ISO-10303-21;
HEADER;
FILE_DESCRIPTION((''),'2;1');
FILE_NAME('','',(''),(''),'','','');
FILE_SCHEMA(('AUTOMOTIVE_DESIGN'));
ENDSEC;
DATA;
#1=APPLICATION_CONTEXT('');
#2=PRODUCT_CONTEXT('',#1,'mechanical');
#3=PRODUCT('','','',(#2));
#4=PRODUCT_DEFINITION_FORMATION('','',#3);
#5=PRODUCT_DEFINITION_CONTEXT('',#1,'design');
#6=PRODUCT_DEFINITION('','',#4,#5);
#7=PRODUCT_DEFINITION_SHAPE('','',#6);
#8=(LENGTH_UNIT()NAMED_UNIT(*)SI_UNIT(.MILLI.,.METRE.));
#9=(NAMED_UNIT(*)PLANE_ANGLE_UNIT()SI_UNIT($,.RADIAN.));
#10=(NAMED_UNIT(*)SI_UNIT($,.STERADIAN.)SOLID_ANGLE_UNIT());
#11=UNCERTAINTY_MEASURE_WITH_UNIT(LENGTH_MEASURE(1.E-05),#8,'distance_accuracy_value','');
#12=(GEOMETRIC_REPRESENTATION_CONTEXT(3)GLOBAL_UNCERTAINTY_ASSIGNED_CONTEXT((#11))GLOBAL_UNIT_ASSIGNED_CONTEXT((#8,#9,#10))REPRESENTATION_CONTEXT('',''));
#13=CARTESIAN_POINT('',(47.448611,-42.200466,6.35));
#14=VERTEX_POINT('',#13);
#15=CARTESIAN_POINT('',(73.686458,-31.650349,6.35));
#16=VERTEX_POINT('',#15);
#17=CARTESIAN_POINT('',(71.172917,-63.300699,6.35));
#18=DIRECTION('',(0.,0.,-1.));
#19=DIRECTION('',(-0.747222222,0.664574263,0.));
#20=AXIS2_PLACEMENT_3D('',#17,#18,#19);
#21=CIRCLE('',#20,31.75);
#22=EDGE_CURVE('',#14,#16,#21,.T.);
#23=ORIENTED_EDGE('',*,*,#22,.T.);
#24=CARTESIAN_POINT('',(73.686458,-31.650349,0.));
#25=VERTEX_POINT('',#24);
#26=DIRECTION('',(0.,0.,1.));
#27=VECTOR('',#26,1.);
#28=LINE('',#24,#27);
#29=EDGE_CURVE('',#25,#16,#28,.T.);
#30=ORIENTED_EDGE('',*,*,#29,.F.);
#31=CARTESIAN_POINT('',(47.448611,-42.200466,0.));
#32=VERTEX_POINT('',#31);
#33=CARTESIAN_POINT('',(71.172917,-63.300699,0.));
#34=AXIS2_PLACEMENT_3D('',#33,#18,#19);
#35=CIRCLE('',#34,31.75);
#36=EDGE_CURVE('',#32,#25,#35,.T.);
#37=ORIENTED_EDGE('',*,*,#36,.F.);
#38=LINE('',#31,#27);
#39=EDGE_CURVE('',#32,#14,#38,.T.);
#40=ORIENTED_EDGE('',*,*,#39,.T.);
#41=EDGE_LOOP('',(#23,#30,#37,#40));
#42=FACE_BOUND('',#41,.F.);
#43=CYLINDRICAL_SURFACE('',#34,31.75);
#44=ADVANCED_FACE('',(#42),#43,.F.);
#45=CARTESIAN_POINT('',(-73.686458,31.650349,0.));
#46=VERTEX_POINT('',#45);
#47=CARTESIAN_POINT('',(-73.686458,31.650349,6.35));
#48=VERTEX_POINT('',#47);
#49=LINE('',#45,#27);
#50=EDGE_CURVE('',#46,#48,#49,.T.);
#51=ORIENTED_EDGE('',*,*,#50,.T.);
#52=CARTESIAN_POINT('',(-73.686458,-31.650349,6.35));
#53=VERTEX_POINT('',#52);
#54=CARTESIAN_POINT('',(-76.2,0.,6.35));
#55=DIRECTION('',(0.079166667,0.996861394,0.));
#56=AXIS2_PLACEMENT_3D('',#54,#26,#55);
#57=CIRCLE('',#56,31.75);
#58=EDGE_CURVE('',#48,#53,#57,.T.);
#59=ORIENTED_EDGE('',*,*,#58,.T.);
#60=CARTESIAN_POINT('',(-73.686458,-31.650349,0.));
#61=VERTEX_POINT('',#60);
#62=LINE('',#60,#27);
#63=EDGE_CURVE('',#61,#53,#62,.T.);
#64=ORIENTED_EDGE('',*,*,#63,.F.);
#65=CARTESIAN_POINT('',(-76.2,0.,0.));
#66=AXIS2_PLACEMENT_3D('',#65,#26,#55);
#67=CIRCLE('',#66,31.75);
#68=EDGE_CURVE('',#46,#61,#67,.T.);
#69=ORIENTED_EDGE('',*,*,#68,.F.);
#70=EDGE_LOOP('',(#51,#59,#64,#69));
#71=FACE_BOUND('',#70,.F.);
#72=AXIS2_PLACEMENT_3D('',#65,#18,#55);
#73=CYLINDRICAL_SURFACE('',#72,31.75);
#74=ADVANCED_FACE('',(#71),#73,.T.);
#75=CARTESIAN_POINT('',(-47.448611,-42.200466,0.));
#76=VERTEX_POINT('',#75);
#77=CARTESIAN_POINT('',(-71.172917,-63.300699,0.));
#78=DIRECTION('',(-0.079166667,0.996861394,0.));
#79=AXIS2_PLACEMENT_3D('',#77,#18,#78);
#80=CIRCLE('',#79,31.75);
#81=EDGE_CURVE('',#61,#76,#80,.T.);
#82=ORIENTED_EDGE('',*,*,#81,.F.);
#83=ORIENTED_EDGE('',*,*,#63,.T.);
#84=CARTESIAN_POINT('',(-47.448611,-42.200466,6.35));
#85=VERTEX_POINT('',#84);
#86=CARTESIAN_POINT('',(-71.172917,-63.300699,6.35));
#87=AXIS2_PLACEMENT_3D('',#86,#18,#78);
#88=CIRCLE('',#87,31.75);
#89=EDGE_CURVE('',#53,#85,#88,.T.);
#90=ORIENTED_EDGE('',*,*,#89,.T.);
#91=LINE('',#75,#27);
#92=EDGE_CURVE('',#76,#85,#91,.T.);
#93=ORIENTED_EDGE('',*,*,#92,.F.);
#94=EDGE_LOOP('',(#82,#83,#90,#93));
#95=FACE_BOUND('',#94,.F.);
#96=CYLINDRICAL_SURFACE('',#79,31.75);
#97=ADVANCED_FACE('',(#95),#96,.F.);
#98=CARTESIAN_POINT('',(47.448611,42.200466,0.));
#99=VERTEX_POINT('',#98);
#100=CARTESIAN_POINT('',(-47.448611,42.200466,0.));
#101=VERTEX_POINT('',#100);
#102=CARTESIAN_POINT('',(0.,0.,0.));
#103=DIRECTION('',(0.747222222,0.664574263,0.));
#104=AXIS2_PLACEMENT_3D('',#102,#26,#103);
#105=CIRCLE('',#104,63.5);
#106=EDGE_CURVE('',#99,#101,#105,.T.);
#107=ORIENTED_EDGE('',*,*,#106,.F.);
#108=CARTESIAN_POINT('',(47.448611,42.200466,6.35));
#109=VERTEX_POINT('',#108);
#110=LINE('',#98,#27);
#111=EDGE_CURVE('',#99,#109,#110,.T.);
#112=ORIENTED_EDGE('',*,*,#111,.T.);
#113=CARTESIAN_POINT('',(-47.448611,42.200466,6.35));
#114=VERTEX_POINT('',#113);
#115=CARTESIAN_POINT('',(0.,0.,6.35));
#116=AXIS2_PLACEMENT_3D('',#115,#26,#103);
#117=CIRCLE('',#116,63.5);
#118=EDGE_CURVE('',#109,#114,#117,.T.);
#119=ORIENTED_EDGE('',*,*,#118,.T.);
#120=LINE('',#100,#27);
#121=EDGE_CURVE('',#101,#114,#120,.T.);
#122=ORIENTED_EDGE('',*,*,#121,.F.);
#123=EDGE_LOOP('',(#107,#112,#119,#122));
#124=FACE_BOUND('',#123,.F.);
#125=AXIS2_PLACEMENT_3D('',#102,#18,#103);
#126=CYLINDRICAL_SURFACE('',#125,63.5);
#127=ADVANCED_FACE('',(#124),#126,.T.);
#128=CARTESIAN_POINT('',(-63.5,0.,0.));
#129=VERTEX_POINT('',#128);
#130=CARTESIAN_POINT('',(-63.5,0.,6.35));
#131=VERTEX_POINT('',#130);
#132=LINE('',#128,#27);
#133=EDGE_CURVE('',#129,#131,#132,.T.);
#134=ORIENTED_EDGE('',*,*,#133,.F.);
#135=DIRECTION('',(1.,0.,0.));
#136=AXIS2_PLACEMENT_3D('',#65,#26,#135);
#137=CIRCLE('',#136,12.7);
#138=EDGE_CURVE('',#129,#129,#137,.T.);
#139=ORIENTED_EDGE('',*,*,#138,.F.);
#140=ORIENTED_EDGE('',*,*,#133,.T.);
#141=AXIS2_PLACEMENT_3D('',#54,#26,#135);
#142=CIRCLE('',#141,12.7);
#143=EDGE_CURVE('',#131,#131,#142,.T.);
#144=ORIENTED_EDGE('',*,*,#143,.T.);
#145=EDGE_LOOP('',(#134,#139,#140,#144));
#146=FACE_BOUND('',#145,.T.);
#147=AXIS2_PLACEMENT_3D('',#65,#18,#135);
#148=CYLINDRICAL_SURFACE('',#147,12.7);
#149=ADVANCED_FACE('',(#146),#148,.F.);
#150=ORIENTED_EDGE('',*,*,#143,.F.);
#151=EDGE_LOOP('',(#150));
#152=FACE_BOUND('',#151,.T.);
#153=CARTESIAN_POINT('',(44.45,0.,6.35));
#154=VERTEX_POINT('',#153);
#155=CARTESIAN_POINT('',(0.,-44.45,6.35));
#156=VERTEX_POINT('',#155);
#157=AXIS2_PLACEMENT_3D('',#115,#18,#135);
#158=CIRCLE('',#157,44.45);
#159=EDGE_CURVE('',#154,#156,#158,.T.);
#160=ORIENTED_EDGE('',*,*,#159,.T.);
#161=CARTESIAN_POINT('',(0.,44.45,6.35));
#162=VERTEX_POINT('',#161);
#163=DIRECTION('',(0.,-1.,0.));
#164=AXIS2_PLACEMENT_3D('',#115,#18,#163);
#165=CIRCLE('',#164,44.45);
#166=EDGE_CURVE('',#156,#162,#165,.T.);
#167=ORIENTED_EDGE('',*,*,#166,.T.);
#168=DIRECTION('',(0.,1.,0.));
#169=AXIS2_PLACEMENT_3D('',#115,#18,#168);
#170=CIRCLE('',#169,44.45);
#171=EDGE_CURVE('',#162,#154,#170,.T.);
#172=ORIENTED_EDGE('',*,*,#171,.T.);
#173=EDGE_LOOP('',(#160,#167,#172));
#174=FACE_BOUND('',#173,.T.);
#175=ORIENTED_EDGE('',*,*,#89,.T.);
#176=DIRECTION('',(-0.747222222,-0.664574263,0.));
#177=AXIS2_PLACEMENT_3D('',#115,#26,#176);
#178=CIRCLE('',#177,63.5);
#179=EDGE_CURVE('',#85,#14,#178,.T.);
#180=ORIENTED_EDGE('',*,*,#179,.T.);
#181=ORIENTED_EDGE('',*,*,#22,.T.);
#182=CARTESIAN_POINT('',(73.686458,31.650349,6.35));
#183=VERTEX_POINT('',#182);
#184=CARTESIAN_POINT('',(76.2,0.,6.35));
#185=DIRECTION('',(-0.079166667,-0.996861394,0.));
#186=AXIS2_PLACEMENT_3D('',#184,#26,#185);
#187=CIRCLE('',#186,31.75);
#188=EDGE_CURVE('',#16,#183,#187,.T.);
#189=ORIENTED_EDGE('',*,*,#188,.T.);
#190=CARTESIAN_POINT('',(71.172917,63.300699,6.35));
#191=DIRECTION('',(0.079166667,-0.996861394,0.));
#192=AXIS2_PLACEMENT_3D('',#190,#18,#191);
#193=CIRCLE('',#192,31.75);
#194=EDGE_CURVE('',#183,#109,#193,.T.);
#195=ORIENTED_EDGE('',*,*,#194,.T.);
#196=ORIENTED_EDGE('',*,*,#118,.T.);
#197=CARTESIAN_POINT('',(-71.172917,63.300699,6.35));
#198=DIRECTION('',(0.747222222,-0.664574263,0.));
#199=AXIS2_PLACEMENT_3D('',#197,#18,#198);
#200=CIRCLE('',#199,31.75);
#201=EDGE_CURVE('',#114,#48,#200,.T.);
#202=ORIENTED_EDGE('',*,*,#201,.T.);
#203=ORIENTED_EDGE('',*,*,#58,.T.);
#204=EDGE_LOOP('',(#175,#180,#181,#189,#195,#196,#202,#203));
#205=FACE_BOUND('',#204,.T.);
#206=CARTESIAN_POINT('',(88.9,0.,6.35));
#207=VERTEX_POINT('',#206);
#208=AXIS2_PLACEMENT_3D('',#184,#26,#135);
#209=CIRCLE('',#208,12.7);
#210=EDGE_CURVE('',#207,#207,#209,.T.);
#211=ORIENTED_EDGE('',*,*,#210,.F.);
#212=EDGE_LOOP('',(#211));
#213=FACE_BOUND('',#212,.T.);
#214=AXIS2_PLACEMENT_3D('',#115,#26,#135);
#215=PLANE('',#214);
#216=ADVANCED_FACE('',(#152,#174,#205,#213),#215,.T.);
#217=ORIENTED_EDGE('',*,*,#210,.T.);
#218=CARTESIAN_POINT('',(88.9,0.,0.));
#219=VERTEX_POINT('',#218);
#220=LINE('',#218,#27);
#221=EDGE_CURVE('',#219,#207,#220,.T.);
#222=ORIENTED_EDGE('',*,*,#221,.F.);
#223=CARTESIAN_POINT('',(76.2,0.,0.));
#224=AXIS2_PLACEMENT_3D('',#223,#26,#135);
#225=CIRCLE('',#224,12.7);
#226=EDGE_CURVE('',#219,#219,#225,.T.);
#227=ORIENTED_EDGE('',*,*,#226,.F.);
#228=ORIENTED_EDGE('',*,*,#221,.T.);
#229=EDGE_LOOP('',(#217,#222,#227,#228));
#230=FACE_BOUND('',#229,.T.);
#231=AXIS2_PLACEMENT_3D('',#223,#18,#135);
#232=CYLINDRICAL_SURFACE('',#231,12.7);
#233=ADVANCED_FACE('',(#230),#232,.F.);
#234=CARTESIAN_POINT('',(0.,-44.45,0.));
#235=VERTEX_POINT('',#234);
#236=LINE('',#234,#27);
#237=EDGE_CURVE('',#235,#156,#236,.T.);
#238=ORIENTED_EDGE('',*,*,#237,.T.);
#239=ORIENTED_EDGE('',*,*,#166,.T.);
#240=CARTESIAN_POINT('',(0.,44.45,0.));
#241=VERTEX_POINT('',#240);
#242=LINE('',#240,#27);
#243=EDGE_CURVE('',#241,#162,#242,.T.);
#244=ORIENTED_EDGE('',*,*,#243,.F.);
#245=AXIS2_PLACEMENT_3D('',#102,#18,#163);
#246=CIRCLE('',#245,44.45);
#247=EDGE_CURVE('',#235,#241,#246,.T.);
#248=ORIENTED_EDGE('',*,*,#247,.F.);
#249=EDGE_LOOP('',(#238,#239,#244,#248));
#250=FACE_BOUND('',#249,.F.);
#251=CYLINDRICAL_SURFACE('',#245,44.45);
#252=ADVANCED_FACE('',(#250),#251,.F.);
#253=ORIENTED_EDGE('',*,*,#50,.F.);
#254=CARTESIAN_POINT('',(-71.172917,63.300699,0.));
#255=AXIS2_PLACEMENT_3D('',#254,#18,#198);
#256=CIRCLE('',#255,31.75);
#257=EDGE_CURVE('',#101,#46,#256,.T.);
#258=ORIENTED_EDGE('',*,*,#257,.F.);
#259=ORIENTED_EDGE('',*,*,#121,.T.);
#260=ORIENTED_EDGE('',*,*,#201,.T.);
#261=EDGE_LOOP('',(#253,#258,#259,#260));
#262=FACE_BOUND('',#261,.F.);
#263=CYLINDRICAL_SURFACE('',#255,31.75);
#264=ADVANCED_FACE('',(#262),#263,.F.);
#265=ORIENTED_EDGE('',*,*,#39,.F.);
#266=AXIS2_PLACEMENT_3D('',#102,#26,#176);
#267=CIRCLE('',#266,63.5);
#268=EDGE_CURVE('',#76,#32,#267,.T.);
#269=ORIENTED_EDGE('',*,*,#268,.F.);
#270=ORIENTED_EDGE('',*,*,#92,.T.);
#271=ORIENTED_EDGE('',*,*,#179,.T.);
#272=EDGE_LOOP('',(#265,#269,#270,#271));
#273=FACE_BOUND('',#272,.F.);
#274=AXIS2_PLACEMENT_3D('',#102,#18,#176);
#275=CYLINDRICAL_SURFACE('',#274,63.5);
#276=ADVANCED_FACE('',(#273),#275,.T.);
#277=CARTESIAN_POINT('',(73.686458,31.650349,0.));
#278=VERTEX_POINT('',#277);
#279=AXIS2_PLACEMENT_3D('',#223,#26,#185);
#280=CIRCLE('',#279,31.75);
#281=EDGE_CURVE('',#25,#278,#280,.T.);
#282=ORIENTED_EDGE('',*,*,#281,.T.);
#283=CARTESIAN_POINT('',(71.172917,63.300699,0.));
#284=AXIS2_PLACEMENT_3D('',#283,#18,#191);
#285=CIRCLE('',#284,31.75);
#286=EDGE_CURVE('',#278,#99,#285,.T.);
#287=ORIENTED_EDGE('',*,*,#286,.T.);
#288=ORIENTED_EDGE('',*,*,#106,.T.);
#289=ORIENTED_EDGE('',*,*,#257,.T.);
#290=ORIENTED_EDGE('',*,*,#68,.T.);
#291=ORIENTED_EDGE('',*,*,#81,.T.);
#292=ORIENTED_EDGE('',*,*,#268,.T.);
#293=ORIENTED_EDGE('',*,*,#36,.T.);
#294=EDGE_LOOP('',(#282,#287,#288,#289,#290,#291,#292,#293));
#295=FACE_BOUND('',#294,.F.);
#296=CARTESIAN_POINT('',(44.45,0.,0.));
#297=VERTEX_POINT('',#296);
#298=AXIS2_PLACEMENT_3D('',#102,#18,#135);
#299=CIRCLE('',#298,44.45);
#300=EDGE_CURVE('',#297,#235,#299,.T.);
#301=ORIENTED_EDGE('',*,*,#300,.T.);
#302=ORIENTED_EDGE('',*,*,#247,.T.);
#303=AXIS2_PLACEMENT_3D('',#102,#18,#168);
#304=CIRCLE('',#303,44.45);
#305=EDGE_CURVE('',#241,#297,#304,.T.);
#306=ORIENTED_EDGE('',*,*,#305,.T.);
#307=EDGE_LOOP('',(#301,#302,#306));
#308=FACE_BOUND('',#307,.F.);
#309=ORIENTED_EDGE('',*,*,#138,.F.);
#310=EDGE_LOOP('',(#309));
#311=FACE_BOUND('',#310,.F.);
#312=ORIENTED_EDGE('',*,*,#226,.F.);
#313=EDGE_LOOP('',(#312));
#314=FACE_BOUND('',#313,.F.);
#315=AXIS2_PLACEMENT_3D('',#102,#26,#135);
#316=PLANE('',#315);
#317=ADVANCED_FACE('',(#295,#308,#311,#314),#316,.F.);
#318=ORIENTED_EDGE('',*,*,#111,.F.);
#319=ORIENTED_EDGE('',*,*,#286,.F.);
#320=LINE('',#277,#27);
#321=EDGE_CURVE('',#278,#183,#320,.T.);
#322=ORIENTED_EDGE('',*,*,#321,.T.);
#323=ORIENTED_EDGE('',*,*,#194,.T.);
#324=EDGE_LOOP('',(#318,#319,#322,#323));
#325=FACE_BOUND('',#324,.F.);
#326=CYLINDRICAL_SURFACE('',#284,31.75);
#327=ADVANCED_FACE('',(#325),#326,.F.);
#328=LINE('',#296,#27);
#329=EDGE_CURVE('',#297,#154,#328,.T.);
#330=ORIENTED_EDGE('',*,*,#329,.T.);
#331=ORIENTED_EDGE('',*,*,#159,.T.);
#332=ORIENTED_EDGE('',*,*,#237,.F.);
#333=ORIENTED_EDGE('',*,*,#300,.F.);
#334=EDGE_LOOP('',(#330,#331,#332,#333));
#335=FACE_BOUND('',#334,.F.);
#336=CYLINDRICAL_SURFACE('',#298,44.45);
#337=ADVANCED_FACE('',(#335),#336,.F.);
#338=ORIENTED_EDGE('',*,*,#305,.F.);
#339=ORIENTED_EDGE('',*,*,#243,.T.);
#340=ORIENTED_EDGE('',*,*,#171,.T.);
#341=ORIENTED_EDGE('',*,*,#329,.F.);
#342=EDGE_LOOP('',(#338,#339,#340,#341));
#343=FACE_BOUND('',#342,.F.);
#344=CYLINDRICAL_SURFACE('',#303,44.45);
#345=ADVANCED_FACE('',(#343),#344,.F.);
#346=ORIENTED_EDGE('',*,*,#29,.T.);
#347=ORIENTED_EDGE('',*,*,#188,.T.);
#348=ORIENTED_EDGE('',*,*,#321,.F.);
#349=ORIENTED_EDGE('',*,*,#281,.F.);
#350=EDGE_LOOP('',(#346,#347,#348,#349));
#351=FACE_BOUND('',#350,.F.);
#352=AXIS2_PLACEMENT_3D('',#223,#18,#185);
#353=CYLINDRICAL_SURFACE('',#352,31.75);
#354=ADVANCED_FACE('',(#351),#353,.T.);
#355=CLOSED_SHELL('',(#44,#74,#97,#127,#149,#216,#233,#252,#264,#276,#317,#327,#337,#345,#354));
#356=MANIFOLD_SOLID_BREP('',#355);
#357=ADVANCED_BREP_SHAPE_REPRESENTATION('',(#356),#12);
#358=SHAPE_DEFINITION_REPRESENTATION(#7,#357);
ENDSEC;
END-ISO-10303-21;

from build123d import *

# Parameters (mm, degrees)
F0_R     = 12.7
F1_DEPTH = 6.35


# Not quite as in the source:
# - a length typed as a fraction of an inch, garbled in the dataset ("3 / 203.2 mm" for 3/8 in), is restored


with BuildPart() as f1:
    # F0 (on Top) → F1 (new body)
    with BuildSketch(Plane.XY):
        with BuildLine():
            ThreePointArc((-73.6864583333, -31.6503492602), (-59.3280711503, -33.8428959089), (-47.4486111111, -42.2004656802))
            ThreePointArc((-47.4486111111, -42.2004656802), (0, -63.5), (47.4486111111, -42.2004656802))
            ThreePointArc((47.4486111111, -42.2004656802), (59.3280711503, -33.8428959089), (73.6864583333, -31.6503492602))
            ThreePointArc((73.6864583333, -31.6503492602), (107.95, 0), (73.6864583333, 31.6503492602))
            ThreePointArc((73.6864583333, 31.6503492602), (59.3280711503, 33.8428959089), (47.4486111111, 42.2004656802))
            ThreePointArc((47.4486111111, 42.2004656802), (0, 63.5), (-47.4486111111, 42.2004656802))
            ThreePointArc((-47.4486111111, 42.2004656802), (-59.3280711503, 33.8428959089), (-73.6864583333, 31.6503492602))
            ThreePointArc((-73.6864583333, 31.6503492602), (-107.95, 0), (-73.6864583333, -31.6503492602))
        make_face()
        with Locations((-76.2, 0)):
            Circle(F0_R, mode=Mode.SUBTRACT)
        with BuildLine():
            ThreePointArc((0, 44.45), (31.4308964237, 31.4308964237), (44.45, 0))
            ThreePointArc((44.45, 0), (31.4308964237, -31.4308964237), (0, -44.45))
            ThreePointArc((0, -44.45), (-44.45, 0), (0, 44.45))
        make_face(mode=Mode.SUBTRACT)
        with Locations((76.2, 0)):
            Circle(F0_R, mode=Mode.SUBTRACT)
    extrude(amount=F1_DEPTH)


solid = f1.part
